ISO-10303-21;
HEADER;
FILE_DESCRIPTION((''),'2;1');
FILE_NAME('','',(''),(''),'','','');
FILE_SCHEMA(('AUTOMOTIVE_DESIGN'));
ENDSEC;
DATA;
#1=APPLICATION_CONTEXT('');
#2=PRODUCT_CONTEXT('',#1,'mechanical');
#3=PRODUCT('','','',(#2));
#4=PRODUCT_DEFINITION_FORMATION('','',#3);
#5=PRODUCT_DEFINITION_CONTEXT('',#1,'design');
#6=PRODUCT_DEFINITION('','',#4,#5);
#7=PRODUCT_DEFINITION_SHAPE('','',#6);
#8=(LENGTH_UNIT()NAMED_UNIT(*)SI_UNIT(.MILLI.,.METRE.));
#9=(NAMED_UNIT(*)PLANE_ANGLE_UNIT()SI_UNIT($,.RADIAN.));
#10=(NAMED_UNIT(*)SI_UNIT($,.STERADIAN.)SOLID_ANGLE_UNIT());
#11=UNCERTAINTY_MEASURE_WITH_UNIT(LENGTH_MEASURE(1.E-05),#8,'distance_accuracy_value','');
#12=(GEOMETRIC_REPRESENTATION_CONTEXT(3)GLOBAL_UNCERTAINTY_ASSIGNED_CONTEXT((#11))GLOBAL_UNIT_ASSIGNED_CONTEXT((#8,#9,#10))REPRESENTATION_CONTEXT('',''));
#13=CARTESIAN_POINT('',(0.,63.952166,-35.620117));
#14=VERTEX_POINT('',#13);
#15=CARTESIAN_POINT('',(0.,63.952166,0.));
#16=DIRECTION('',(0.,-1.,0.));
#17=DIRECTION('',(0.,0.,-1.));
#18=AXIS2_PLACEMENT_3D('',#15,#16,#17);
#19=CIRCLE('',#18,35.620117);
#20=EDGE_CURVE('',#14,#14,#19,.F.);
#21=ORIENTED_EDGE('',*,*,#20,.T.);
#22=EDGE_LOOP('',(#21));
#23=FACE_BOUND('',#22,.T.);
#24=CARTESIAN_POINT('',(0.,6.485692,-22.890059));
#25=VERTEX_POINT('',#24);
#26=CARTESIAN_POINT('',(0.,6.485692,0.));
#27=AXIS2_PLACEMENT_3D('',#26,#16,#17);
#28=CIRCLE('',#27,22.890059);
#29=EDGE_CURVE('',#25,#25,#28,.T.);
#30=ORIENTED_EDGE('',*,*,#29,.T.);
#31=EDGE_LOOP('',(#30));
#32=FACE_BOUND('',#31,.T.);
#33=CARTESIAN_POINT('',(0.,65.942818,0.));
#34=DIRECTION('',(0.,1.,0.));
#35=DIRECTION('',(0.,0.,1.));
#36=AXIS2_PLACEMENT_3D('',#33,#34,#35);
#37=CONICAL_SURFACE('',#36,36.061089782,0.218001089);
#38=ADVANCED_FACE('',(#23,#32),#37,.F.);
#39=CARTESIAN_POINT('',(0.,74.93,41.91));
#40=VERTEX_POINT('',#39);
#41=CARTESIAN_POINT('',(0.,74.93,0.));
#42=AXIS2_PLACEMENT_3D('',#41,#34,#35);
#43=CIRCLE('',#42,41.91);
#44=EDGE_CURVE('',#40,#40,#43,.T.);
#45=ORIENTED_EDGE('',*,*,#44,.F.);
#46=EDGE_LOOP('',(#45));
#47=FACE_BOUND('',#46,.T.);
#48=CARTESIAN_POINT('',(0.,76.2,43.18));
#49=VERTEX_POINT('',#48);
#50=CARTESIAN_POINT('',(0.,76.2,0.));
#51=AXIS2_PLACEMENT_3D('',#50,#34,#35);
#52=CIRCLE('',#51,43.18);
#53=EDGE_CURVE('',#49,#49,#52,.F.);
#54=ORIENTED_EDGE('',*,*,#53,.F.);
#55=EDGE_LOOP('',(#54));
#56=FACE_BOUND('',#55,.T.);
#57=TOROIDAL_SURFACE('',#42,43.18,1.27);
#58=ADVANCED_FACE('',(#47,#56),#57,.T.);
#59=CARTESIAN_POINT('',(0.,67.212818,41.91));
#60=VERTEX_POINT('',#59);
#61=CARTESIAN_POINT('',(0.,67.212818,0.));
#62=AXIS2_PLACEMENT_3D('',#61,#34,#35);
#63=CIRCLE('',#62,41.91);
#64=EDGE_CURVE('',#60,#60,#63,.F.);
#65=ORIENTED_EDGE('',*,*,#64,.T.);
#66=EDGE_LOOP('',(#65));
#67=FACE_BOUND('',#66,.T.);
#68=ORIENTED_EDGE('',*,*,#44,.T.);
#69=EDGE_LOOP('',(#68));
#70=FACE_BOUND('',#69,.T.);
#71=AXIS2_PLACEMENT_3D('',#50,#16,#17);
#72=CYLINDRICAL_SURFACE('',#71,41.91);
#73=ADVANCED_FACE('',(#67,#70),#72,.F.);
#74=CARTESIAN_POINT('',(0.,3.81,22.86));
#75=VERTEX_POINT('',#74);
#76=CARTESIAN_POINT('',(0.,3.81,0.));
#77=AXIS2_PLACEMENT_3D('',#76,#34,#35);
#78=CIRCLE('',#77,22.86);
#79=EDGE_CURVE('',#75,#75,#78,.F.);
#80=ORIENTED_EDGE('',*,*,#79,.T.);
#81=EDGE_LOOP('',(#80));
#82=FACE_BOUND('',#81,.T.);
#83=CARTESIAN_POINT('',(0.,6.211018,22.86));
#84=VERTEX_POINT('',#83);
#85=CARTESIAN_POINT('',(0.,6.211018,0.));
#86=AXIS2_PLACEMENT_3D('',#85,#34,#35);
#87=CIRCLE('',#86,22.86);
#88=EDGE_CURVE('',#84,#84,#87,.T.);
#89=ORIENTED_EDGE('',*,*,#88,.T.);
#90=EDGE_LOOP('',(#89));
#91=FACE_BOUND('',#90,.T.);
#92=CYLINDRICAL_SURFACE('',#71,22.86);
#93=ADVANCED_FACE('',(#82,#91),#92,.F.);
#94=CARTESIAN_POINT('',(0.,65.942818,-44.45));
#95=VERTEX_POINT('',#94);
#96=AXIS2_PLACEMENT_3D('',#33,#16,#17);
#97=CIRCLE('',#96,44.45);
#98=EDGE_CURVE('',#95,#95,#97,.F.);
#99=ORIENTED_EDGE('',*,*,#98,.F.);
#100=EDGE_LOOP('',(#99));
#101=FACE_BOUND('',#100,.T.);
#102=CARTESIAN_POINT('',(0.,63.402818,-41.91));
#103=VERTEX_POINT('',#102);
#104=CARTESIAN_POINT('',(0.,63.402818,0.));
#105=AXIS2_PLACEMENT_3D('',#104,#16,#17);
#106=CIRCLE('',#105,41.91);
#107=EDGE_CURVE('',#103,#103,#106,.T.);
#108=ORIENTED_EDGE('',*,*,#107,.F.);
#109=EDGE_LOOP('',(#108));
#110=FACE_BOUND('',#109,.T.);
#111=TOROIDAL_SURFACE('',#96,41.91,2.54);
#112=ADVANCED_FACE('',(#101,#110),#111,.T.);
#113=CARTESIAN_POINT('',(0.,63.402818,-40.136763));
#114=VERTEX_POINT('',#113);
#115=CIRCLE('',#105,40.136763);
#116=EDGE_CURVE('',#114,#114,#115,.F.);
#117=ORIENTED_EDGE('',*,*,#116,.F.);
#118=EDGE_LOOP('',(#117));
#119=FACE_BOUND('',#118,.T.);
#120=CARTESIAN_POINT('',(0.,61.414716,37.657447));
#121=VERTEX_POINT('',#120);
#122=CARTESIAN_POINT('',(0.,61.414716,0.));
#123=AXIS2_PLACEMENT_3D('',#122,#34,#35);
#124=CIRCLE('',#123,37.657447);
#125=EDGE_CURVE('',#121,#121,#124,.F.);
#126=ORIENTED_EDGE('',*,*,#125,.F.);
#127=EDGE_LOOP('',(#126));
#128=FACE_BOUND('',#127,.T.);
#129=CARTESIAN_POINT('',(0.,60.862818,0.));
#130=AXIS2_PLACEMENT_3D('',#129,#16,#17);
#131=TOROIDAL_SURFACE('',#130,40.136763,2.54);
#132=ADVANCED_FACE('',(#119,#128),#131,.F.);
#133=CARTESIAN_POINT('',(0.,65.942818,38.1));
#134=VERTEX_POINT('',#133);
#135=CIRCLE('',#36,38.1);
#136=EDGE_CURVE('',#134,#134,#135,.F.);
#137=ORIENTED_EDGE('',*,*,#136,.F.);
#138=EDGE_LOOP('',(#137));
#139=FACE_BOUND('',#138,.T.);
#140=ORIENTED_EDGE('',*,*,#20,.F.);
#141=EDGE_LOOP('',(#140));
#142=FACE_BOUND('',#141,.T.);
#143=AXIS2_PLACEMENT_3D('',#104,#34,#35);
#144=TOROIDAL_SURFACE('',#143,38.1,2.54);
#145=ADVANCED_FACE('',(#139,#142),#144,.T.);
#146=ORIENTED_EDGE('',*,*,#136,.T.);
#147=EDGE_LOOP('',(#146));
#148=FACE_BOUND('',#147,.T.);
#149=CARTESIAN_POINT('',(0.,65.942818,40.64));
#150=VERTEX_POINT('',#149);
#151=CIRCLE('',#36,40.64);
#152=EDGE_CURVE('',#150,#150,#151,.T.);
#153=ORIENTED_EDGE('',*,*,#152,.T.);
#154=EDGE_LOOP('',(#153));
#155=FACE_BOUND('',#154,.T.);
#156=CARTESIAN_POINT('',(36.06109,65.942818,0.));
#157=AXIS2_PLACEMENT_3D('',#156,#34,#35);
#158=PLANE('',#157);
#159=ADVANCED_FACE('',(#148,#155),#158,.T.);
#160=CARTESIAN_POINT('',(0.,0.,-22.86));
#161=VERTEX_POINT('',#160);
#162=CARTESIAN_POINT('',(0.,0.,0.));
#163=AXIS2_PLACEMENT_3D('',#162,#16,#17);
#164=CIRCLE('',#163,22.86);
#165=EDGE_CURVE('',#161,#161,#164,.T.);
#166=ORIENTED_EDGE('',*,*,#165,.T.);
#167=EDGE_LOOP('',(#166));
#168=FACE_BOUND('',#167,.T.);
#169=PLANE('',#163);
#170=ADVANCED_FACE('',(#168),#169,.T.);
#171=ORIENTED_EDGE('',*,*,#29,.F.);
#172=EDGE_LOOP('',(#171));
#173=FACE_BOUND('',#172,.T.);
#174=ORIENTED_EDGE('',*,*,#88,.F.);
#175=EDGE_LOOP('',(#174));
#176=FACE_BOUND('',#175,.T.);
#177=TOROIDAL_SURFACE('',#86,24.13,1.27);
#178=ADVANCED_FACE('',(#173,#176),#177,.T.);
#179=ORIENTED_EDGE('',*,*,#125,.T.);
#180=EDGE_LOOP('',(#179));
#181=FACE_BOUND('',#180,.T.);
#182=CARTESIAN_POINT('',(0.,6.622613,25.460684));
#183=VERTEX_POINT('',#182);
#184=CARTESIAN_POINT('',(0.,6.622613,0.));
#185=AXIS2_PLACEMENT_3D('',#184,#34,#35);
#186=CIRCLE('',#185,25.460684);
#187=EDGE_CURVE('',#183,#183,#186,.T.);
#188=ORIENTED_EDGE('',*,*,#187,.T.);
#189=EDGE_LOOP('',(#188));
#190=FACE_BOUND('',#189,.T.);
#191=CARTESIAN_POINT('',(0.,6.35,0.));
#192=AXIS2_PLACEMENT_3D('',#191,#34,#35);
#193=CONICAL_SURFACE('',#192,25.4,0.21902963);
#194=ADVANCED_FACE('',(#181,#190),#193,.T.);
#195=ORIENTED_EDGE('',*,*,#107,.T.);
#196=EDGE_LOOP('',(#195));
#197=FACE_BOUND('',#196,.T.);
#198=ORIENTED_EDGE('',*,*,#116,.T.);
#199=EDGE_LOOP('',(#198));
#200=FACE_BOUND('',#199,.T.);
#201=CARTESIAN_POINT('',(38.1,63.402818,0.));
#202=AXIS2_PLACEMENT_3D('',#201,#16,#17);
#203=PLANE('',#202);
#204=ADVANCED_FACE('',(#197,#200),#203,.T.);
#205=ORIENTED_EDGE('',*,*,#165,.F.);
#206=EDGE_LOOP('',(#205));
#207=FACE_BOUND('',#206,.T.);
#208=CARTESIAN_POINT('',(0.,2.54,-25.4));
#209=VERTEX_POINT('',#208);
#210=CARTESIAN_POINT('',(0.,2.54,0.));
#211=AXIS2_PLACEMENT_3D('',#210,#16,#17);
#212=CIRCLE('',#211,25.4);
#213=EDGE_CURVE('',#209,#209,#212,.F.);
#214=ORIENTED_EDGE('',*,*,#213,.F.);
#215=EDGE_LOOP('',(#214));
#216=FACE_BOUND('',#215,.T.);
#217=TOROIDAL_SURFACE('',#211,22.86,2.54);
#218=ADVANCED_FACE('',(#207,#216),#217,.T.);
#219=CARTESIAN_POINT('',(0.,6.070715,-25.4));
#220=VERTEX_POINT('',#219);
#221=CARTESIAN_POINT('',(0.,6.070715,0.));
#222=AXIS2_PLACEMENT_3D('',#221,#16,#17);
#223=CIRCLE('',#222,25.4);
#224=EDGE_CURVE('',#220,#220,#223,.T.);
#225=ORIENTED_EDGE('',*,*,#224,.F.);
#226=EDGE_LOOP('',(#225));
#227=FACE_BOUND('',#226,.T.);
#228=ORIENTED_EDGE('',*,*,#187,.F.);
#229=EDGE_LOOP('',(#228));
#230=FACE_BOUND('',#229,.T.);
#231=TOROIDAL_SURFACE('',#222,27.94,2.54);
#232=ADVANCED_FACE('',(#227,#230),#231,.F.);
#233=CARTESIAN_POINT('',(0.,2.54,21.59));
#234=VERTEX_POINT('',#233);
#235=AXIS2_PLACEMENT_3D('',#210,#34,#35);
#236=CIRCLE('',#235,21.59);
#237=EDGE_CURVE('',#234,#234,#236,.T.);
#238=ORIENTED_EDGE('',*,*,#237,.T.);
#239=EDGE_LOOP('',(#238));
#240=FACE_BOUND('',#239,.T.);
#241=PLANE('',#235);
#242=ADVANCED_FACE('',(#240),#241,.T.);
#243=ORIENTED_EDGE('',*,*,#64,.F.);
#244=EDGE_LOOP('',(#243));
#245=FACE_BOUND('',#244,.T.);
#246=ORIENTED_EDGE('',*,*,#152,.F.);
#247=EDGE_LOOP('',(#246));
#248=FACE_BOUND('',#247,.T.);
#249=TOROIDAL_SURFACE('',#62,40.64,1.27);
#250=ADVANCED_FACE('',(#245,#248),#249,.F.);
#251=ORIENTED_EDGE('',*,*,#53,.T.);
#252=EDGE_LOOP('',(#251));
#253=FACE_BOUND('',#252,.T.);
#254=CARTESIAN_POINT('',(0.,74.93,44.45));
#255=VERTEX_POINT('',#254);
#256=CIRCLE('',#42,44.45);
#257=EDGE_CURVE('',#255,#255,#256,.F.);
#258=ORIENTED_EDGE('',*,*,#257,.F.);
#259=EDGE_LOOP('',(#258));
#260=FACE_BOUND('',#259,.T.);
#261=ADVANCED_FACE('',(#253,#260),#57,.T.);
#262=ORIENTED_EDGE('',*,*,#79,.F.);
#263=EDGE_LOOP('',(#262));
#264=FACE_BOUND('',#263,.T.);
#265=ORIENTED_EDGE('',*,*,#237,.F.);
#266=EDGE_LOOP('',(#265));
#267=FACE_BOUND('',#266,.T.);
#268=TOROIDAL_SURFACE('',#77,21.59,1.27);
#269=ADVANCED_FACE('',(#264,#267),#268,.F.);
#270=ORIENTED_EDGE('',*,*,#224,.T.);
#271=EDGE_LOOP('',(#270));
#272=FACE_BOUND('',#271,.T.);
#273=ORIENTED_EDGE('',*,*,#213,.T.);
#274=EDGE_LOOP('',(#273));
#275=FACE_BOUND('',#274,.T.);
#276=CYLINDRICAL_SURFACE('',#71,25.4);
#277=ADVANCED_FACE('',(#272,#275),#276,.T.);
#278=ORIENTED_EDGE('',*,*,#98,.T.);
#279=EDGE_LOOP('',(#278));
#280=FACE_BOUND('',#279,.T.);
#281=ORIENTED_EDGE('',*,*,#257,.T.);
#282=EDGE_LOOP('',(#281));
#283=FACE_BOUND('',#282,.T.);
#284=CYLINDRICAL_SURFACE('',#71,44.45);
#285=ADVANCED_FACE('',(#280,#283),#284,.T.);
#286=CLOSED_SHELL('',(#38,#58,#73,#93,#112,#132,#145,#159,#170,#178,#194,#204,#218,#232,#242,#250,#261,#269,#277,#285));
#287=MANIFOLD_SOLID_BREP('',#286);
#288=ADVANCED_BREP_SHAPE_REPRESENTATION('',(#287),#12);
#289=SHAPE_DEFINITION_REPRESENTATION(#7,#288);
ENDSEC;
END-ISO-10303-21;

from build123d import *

# Parameters (mm, degrees)
FILLET1_R = 2.54
FILLET2_R = 1.27


with BuildPart() as part:
    # Sketch1 → Revolve1 (revolve)
    with BuildSketch(Plane.XY, mode=Mode.PRIVATE) as revolve1_sk:
        Polygon((0, 0), (25.4, 0), (25.4, 6.35), (38.1, 63.402818228), (44.45, 63.402818228), (44.45, 76.2), (41.91, 76.2), (41.91, 65.942818228), (36.061089782, 65.942818228), (22.86, 6.35), (22.86, 2.54), (0, 2.54), align=None)
    revolve(revolve1_sk.sketch.rotate(Axis((0, 76.2, 0), (0, 1, 0)), 90), axis=Axis((0, 76.2, 0), (0, 1, 0)))

    # Fillet1
    fillet1_edges = [part.edges().sort_by_distance(p)[0] for p in [
        (0, 63.402818228, 44.45),
        (0, 65.942818228, 36.061089782),
        (0, 0, 25.4),
        (0, 6.35, 25.4),
        (0, 63.402818228, 38.1),
    ]]
    fillet(fillet1_edges, radius=FILLET1_R)

    # Fillet2
    fillet2_edges = [part.edges().sort_by_distance(p)[0] for p in [
        (0, 76.2, 44.45),
        (0, 76.2, 41.91),
        (0, 65.942818228, 41.91),
        (0, 6.35, 22.86),
        (0, 2.54, 22.86),
    ]]
    fillet(fillet2_edges, radius=FILLET2_R - 0.0001)  # a hair under: the kernel refuses the full size


solid = part.part
